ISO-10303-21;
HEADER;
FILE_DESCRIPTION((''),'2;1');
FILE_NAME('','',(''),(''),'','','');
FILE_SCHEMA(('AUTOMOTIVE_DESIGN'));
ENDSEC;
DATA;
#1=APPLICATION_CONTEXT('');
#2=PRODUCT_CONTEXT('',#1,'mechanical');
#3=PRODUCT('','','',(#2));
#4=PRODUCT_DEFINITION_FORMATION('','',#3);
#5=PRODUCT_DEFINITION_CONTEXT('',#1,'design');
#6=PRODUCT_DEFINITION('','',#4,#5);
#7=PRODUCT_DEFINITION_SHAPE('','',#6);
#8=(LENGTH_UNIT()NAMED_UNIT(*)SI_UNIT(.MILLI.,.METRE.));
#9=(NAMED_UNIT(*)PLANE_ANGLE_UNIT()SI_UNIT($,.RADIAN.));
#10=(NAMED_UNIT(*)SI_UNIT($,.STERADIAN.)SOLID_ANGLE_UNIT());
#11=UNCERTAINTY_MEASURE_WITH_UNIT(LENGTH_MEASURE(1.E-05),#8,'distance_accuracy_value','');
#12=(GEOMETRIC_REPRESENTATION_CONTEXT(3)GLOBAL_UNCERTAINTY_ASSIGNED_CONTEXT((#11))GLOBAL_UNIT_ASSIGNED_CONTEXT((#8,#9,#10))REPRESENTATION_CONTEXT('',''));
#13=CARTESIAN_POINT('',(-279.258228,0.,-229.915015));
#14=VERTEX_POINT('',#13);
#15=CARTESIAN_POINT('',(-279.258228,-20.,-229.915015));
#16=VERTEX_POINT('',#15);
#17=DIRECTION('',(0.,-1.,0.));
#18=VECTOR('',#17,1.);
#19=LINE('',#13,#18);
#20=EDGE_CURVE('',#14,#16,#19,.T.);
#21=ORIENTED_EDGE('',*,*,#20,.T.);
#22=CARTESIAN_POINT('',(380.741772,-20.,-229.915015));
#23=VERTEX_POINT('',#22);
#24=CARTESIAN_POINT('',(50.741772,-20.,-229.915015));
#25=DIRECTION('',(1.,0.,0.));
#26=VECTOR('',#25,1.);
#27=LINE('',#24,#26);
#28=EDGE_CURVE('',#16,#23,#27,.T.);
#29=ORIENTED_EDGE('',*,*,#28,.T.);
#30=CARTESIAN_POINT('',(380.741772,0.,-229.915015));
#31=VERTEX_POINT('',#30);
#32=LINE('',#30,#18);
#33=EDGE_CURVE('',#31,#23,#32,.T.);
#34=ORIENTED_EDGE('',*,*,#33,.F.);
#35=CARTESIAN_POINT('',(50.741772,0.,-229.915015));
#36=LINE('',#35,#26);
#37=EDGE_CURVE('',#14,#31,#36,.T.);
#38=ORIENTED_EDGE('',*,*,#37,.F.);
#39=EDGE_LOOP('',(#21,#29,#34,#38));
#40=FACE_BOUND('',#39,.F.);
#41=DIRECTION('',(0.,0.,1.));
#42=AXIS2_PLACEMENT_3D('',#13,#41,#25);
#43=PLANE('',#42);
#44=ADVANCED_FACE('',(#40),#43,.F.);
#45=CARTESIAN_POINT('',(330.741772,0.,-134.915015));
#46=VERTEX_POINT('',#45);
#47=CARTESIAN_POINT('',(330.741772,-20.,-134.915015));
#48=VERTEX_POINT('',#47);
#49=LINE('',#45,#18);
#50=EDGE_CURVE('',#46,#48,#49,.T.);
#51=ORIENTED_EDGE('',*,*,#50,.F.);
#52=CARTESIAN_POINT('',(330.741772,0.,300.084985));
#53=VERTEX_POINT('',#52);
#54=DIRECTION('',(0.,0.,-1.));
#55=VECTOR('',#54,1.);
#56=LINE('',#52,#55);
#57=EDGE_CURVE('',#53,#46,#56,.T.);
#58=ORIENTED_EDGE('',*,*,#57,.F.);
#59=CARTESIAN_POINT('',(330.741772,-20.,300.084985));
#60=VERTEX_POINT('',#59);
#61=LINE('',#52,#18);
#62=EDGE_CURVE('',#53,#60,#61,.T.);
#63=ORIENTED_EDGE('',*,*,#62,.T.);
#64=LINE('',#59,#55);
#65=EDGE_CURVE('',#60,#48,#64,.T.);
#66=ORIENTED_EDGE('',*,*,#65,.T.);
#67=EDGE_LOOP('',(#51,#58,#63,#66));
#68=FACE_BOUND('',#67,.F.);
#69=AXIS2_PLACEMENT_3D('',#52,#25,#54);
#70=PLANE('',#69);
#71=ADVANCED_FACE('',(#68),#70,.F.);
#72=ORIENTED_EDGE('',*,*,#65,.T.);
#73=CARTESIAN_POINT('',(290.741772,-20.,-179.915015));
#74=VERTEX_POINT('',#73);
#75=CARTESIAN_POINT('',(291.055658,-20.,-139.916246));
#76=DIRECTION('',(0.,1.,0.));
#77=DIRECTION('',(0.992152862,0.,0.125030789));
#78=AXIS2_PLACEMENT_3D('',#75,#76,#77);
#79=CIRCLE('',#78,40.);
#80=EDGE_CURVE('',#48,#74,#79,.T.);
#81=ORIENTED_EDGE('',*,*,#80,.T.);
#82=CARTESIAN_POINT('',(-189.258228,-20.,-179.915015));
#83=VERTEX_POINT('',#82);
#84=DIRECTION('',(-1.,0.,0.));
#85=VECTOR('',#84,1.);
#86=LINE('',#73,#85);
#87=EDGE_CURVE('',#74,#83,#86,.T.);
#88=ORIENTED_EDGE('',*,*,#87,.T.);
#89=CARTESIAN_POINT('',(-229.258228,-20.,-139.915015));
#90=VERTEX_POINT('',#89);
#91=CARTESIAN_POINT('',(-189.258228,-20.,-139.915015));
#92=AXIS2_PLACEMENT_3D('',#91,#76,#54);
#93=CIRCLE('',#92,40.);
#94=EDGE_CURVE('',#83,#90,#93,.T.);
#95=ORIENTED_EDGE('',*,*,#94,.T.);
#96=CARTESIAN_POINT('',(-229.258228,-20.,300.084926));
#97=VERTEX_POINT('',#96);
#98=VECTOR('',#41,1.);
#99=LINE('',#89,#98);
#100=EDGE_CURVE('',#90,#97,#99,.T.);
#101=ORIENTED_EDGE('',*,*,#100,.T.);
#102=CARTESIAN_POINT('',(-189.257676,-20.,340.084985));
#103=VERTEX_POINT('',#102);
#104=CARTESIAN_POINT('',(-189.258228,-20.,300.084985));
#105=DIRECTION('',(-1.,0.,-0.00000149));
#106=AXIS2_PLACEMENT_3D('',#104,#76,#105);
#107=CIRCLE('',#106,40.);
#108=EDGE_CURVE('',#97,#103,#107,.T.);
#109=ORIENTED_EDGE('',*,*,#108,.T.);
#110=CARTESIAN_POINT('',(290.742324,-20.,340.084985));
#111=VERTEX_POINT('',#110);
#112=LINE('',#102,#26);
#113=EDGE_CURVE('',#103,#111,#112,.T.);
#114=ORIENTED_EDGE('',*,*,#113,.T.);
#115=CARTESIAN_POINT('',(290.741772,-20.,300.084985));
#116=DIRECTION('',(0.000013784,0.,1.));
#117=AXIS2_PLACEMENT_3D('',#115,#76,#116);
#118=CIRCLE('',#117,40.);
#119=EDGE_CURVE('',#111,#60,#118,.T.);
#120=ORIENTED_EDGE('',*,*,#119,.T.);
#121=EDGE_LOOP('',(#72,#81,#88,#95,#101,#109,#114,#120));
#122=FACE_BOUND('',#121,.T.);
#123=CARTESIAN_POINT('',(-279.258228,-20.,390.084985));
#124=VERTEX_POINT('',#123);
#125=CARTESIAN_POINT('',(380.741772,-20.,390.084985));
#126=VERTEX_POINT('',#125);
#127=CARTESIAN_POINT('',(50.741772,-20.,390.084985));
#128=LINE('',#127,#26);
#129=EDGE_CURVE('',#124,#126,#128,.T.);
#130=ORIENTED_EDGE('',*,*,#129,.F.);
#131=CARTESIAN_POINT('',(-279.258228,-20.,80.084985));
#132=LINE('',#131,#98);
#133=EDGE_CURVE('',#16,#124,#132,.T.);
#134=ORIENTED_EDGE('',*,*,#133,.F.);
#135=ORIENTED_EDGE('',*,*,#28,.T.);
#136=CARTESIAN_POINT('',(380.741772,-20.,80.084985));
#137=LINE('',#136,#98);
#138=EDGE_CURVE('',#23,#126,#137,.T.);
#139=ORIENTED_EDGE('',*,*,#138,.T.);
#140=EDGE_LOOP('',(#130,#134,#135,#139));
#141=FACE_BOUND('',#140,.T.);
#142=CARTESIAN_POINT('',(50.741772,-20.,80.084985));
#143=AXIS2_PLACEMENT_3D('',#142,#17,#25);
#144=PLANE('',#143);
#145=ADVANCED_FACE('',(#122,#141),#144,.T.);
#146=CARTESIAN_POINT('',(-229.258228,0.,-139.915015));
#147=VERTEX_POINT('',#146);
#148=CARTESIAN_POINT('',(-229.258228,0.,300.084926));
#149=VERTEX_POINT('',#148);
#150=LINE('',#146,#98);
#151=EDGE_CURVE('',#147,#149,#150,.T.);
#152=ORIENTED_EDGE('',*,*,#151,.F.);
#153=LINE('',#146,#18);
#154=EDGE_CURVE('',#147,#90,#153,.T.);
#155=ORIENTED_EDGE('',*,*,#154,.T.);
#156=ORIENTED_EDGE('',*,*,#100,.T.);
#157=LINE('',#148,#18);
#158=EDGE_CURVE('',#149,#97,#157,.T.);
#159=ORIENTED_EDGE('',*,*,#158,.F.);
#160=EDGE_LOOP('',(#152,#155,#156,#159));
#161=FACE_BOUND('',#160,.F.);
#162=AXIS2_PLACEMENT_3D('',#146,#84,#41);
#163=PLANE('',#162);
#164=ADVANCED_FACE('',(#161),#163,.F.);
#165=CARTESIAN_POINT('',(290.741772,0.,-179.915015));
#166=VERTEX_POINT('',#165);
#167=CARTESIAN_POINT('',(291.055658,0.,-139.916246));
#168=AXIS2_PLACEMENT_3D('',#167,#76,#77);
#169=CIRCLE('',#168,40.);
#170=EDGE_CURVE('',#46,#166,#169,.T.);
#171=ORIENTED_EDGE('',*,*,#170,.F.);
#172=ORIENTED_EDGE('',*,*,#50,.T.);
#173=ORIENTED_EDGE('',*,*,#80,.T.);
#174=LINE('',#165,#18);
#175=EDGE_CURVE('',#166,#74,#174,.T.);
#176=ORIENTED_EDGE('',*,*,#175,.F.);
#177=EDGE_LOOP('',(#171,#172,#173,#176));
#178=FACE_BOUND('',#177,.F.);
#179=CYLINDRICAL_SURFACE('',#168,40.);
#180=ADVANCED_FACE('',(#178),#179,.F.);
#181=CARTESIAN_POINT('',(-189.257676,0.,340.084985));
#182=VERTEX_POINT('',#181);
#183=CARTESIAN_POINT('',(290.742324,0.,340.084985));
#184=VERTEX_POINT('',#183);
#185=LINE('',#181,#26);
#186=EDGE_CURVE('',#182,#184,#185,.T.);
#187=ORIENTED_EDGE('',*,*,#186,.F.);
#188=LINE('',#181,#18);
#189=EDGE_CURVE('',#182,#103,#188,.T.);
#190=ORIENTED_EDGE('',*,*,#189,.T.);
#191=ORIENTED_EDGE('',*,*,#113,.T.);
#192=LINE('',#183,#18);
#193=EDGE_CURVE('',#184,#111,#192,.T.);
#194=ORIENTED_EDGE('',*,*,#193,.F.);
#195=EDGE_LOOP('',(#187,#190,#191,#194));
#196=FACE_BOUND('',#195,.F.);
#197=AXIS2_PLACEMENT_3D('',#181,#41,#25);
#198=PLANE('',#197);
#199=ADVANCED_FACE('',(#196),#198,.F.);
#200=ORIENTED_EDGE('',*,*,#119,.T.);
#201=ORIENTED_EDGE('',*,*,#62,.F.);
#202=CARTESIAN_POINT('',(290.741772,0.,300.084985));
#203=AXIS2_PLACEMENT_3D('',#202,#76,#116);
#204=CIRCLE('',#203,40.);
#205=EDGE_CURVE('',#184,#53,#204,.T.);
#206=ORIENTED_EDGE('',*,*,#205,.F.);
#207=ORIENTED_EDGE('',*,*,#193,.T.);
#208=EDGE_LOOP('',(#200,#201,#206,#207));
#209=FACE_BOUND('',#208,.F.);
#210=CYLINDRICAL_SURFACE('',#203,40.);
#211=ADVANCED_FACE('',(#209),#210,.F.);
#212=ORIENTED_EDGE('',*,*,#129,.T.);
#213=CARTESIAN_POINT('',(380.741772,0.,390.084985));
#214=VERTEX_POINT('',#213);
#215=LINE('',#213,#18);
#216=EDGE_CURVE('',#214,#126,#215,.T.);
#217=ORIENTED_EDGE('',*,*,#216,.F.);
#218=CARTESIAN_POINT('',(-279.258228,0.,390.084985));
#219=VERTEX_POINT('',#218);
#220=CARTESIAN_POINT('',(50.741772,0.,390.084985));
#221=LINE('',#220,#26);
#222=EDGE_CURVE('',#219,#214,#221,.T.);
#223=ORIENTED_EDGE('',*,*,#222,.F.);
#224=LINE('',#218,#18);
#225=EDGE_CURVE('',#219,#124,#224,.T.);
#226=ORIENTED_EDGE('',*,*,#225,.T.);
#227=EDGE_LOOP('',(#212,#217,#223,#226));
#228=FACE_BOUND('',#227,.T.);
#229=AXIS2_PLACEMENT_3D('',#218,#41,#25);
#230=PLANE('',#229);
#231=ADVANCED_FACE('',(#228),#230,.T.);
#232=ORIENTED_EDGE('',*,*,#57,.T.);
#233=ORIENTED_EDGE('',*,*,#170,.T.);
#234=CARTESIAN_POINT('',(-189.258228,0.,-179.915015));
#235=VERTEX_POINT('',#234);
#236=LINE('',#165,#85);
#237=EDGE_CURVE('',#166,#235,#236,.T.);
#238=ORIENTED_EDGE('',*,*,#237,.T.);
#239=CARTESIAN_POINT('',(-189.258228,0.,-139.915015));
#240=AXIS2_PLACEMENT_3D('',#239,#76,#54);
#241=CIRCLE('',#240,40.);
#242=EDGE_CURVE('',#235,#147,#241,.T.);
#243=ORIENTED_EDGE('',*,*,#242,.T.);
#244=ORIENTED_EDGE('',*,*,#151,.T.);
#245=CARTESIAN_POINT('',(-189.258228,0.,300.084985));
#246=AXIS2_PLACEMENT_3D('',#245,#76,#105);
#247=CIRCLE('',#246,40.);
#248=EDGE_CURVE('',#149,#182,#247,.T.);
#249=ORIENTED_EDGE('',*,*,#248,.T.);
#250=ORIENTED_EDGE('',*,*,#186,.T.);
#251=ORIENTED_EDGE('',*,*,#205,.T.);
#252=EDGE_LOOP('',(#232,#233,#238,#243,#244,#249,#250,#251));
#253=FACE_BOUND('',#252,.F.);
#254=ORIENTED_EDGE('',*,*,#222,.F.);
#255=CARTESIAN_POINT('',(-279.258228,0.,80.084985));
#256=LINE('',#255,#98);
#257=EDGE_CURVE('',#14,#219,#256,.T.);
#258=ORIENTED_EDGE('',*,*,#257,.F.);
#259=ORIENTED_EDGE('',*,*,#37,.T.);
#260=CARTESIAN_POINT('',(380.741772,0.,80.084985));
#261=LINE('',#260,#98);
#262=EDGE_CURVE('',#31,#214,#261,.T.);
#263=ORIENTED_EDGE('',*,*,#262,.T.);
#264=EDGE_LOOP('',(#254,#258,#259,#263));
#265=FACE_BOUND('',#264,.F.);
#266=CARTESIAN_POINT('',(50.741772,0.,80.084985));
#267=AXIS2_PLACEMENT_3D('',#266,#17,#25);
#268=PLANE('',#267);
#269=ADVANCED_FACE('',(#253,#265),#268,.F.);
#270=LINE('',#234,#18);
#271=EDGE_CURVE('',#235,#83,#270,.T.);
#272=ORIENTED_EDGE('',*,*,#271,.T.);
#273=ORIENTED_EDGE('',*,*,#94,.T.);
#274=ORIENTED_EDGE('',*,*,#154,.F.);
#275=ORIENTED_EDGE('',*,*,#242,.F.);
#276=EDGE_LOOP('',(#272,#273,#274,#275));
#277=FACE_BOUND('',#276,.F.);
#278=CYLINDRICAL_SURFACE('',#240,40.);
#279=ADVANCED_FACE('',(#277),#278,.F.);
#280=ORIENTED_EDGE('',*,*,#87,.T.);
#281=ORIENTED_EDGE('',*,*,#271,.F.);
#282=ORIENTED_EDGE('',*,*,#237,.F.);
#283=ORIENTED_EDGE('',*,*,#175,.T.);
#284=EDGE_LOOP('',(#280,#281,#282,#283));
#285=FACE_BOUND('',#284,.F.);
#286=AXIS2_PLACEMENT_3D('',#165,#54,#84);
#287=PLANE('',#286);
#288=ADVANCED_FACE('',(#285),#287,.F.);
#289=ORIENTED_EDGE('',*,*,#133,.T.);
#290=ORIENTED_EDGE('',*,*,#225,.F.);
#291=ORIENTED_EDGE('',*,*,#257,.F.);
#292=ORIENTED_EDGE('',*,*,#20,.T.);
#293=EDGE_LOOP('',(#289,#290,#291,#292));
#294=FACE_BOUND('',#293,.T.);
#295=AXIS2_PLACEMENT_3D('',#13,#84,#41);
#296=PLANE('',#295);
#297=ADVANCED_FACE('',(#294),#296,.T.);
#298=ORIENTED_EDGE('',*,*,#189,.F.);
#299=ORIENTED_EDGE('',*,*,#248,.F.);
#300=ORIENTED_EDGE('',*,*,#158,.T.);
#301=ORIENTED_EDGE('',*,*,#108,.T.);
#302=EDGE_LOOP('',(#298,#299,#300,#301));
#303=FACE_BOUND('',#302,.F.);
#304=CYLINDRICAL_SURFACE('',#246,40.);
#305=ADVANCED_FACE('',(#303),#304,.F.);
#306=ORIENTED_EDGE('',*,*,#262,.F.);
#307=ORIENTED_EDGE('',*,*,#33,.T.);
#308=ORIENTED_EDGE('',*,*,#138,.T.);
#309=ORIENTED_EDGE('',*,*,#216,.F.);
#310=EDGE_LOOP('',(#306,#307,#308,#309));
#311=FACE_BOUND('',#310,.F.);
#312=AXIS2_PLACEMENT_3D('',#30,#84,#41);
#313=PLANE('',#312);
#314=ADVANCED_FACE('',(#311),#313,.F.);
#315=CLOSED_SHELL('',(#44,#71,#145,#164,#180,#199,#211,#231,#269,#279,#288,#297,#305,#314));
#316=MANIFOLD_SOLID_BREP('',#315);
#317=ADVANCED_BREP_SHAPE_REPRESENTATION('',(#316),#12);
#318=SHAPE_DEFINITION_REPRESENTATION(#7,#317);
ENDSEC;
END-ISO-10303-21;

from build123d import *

# Parameters (mm, degrees)
F0_W     = 660
F0_H     = 620
F1_DEPTH = 20


# Not quite as in the source:
# - a feature names something its author has since deleted; it is built from what else it names


with BuildPart() as f1:
    # F0 (on Front) → F1 (new body)
    with BuildSketch(Plane.XZ):
        with Locations((50.7417723536, 80.0849853243)):
            Rectangle(F0_W, F0_H)
        with BuildLine():
            ThreePointArc((-229.2582276464, 300.0849257198), (-217.5423250388, 328.3694304295), (-189.2576763034, 340.0849853243))
            Line((-189.2576763034, 340.0849853243), (290.7423236966, 340.0849853243))
            ThreePointArc((290.7423236966, 340.0849853243), (319.026238531, 328.3690616443), (330.7417723536, 300.0849853241))
            Line((330.7417723536, 300.0849853241), (330.7417723536, -134.9150146759))
            ThreePointArc((330.7417723536, -134.9150146759), (320.9520306177, -166.4907997995), (290.7417723536, -179.9150146759))
            Line((290.7417723536, -179.9150146759), (-189.2582276464, -179.9150146759))
            ThreePointArc((-189.2582276464, -179.9150146759), (-217.5424988938, -168.1992859234), (-229.2582276464, -139.9150146759))
            Line((-229.2582276464, -139.9150146759), (-229.2582276464, 300.0849257198))
        make_face(mode=Mode.SUBTRACT)
    extrude(amount=F1_DEPTH)


solid = f1.part
